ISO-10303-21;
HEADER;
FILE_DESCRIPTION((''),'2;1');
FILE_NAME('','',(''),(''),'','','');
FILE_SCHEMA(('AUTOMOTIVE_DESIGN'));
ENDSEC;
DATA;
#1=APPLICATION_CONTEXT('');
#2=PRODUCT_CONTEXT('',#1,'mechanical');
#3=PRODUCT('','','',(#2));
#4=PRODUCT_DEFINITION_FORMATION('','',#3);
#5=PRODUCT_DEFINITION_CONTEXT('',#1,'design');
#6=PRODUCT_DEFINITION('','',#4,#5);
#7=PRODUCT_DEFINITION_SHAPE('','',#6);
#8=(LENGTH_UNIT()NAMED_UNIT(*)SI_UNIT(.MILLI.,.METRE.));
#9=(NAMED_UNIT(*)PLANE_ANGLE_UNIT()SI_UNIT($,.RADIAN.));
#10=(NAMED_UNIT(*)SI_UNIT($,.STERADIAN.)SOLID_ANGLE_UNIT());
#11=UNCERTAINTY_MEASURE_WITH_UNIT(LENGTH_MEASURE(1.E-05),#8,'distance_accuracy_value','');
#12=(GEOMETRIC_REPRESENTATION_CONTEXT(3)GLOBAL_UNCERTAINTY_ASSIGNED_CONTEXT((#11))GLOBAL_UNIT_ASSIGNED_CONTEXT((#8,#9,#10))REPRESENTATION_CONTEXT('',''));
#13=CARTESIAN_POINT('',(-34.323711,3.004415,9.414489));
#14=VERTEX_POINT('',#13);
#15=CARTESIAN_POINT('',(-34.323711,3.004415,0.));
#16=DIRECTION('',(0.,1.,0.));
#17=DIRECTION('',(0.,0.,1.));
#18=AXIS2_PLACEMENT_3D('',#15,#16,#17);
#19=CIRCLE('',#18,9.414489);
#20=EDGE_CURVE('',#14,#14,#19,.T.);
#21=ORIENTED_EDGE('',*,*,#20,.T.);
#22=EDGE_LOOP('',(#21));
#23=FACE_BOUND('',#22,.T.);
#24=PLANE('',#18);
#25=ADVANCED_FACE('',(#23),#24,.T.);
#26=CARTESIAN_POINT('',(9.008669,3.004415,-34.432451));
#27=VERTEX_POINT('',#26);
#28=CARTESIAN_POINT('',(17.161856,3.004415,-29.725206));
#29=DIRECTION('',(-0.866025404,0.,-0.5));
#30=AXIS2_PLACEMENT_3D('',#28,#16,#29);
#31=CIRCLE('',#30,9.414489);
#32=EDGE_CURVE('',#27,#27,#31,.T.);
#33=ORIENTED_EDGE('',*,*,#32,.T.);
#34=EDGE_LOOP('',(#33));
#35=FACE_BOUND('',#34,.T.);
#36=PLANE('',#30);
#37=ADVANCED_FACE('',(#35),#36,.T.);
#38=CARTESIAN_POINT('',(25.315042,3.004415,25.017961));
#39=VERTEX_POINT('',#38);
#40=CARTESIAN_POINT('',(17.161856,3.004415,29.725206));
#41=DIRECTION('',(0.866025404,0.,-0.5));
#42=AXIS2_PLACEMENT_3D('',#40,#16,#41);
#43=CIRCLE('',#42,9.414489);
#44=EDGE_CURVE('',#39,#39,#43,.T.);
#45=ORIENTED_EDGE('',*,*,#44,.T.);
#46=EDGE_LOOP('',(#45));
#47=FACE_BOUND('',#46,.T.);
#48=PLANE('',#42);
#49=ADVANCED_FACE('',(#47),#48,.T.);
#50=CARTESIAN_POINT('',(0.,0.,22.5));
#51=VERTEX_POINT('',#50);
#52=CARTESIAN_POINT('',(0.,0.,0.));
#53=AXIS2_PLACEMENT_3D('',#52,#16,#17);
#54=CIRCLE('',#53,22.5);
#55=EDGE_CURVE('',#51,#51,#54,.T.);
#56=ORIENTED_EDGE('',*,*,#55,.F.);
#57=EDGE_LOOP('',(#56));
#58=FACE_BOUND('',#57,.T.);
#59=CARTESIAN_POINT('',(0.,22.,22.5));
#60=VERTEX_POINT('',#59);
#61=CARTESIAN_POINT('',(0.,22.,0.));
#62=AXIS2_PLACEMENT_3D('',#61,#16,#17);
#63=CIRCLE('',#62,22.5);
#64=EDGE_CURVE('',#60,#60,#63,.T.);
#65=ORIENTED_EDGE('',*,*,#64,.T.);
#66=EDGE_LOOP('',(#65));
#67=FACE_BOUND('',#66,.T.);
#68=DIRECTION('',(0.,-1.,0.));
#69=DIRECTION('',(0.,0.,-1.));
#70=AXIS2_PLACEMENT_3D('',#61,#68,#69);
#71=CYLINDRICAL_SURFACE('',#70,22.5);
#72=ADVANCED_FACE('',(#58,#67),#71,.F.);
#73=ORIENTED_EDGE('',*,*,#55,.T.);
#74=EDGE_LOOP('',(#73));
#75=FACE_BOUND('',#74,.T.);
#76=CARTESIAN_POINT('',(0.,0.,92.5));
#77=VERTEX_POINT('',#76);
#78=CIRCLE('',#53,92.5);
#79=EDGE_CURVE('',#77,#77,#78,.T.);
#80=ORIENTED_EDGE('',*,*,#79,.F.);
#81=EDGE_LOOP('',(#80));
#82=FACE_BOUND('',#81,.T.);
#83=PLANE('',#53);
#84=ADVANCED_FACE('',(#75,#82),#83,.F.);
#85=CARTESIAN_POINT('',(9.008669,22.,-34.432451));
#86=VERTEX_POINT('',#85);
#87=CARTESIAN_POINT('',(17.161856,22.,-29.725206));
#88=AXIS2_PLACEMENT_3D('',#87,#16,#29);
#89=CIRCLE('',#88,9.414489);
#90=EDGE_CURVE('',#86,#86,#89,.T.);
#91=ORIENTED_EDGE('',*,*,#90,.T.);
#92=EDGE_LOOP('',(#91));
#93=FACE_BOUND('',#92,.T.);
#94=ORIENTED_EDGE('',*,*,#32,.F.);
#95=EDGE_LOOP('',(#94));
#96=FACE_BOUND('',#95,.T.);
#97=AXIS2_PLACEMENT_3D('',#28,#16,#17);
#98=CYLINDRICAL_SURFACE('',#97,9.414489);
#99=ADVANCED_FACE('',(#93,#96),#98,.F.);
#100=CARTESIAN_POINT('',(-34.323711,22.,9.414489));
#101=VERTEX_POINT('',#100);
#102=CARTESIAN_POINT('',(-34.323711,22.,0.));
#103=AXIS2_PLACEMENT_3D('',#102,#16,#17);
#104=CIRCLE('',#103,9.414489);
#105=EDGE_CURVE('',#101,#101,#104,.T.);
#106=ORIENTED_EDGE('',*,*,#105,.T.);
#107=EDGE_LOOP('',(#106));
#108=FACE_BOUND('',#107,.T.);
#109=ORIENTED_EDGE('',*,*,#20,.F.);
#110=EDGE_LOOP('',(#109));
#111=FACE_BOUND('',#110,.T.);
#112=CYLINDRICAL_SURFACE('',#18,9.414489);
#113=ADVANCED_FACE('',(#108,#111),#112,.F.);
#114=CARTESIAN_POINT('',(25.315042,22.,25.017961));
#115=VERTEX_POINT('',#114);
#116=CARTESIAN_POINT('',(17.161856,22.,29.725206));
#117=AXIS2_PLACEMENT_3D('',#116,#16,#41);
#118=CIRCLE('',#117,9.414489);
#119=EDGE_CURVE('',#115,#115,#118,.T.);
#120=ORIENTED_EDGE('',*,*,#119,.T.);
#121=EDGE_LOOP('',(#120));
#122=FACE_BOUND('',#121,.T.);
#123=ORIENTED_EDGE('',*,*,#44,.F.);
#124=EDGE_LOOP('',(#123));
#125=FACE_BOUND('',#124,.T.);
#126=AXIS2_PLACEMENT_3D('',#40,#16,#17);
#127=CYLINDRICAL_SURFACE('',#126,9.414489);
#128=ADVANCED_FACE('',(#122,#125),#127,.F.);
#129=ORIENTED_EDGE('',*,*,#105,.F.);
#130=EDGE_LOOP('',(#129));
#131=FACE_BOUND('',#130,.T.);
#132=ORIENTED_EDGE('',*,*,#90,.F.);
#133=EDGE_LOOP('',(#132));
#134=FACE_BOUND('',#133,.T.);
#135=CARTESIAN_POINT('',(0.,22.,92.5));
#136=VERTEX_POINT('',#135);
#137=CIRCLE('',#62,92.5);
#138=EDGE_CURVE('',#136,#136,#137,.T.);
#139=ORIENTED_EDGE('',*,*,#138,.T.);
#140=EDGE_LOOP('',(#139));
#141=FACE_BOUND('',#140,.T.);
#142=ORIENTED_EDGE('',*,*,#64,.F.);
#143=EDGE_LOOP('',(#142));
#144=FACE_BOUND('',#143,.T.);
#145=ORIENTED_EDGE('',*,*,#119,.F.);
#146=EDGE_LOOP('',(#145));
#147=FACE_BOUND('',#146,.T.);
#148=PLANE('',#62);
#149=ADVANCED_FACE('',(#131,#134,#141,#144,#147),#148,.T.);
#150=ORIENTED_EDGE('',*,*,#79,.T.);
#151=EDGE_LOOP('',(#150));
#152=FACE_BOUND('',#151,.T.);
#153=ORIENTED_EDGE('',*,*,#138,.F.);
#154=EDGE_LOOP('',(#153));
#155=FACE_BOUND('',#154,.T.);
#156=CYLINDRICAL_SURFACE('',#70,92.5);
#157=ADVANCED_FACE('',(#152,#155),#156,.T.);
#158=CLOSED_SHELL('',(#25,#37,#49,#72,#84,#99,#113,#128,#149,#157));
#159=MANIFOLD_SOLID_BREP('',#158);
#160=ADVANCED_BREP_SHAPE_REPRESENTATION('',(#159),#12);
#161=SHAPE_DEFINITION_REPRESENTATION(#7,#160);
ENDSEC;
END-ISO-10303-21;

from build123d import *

# Parameters (mm, degrees)
SKETCH1_R           = 92.5
BOSS_EXTRUDE1_DEPTH = 22
SKETCH2_R           = 22.5
CUT_EXTRUDE1_DEPTH  = 133.651799837
SKETCH3_R           = 9.41448918
CUT_EXTRUDE2_DEPTH  = 18.99558503
CIRPATTERN1_COUNT   = 3


with BuildPart() as part:
    # Sketch1 → Boss-Extrude1 (new body)
    with BuildSketch(Plane(origin=(0, 0, 0), x_dir=(1, 0, 0), z_dir=(0, 1, 0))):
        Circle(SKETCH1_R)
    extrude(amount=BOSS_EXTRUDE1_DEPTH)

    # Sketch2 → Cut-Extrude1 (cut, through all)
    with BuildSketch(Plane(origin=(0, 0, 0), x_dir=(1, 0, 0), z_dir=(0, 1, 0))):
        Circle(SKETCH2_R)
    extrude(amount=CUT_EXTRUDE1_DEPTH, mode=Mode.SUBTRACT)

    # Sketch3 → Cut-Extrude2 (cut)
    with BuildSketch(Plane(origin=(0, 22, 0), x_dir=(1, 0, 0), z_dir=(0, 1, 0))):
        with Locations((-34.323711273, 0)):
            Circle(SKETCH3_R)
    cut_extrude2 = extrude(amount=-CUT_EXTRUDE2_DEPTH, mode=Mode.SUBTRACT)

    # CirPattern1: Cut-Extrude2 ×3 about axis
    cirpattern1_axis = Axis((0, 0, 0), (0, 1, 0))
    for i in range(1, CIRPATTERN1_COUNT):
        add(cut_extrude2.rotate(cirpattern1_axis, i * 360 / CIRPATTERN1_COUNT), mode=Mode.SUBTRACT)


solid = part.part
